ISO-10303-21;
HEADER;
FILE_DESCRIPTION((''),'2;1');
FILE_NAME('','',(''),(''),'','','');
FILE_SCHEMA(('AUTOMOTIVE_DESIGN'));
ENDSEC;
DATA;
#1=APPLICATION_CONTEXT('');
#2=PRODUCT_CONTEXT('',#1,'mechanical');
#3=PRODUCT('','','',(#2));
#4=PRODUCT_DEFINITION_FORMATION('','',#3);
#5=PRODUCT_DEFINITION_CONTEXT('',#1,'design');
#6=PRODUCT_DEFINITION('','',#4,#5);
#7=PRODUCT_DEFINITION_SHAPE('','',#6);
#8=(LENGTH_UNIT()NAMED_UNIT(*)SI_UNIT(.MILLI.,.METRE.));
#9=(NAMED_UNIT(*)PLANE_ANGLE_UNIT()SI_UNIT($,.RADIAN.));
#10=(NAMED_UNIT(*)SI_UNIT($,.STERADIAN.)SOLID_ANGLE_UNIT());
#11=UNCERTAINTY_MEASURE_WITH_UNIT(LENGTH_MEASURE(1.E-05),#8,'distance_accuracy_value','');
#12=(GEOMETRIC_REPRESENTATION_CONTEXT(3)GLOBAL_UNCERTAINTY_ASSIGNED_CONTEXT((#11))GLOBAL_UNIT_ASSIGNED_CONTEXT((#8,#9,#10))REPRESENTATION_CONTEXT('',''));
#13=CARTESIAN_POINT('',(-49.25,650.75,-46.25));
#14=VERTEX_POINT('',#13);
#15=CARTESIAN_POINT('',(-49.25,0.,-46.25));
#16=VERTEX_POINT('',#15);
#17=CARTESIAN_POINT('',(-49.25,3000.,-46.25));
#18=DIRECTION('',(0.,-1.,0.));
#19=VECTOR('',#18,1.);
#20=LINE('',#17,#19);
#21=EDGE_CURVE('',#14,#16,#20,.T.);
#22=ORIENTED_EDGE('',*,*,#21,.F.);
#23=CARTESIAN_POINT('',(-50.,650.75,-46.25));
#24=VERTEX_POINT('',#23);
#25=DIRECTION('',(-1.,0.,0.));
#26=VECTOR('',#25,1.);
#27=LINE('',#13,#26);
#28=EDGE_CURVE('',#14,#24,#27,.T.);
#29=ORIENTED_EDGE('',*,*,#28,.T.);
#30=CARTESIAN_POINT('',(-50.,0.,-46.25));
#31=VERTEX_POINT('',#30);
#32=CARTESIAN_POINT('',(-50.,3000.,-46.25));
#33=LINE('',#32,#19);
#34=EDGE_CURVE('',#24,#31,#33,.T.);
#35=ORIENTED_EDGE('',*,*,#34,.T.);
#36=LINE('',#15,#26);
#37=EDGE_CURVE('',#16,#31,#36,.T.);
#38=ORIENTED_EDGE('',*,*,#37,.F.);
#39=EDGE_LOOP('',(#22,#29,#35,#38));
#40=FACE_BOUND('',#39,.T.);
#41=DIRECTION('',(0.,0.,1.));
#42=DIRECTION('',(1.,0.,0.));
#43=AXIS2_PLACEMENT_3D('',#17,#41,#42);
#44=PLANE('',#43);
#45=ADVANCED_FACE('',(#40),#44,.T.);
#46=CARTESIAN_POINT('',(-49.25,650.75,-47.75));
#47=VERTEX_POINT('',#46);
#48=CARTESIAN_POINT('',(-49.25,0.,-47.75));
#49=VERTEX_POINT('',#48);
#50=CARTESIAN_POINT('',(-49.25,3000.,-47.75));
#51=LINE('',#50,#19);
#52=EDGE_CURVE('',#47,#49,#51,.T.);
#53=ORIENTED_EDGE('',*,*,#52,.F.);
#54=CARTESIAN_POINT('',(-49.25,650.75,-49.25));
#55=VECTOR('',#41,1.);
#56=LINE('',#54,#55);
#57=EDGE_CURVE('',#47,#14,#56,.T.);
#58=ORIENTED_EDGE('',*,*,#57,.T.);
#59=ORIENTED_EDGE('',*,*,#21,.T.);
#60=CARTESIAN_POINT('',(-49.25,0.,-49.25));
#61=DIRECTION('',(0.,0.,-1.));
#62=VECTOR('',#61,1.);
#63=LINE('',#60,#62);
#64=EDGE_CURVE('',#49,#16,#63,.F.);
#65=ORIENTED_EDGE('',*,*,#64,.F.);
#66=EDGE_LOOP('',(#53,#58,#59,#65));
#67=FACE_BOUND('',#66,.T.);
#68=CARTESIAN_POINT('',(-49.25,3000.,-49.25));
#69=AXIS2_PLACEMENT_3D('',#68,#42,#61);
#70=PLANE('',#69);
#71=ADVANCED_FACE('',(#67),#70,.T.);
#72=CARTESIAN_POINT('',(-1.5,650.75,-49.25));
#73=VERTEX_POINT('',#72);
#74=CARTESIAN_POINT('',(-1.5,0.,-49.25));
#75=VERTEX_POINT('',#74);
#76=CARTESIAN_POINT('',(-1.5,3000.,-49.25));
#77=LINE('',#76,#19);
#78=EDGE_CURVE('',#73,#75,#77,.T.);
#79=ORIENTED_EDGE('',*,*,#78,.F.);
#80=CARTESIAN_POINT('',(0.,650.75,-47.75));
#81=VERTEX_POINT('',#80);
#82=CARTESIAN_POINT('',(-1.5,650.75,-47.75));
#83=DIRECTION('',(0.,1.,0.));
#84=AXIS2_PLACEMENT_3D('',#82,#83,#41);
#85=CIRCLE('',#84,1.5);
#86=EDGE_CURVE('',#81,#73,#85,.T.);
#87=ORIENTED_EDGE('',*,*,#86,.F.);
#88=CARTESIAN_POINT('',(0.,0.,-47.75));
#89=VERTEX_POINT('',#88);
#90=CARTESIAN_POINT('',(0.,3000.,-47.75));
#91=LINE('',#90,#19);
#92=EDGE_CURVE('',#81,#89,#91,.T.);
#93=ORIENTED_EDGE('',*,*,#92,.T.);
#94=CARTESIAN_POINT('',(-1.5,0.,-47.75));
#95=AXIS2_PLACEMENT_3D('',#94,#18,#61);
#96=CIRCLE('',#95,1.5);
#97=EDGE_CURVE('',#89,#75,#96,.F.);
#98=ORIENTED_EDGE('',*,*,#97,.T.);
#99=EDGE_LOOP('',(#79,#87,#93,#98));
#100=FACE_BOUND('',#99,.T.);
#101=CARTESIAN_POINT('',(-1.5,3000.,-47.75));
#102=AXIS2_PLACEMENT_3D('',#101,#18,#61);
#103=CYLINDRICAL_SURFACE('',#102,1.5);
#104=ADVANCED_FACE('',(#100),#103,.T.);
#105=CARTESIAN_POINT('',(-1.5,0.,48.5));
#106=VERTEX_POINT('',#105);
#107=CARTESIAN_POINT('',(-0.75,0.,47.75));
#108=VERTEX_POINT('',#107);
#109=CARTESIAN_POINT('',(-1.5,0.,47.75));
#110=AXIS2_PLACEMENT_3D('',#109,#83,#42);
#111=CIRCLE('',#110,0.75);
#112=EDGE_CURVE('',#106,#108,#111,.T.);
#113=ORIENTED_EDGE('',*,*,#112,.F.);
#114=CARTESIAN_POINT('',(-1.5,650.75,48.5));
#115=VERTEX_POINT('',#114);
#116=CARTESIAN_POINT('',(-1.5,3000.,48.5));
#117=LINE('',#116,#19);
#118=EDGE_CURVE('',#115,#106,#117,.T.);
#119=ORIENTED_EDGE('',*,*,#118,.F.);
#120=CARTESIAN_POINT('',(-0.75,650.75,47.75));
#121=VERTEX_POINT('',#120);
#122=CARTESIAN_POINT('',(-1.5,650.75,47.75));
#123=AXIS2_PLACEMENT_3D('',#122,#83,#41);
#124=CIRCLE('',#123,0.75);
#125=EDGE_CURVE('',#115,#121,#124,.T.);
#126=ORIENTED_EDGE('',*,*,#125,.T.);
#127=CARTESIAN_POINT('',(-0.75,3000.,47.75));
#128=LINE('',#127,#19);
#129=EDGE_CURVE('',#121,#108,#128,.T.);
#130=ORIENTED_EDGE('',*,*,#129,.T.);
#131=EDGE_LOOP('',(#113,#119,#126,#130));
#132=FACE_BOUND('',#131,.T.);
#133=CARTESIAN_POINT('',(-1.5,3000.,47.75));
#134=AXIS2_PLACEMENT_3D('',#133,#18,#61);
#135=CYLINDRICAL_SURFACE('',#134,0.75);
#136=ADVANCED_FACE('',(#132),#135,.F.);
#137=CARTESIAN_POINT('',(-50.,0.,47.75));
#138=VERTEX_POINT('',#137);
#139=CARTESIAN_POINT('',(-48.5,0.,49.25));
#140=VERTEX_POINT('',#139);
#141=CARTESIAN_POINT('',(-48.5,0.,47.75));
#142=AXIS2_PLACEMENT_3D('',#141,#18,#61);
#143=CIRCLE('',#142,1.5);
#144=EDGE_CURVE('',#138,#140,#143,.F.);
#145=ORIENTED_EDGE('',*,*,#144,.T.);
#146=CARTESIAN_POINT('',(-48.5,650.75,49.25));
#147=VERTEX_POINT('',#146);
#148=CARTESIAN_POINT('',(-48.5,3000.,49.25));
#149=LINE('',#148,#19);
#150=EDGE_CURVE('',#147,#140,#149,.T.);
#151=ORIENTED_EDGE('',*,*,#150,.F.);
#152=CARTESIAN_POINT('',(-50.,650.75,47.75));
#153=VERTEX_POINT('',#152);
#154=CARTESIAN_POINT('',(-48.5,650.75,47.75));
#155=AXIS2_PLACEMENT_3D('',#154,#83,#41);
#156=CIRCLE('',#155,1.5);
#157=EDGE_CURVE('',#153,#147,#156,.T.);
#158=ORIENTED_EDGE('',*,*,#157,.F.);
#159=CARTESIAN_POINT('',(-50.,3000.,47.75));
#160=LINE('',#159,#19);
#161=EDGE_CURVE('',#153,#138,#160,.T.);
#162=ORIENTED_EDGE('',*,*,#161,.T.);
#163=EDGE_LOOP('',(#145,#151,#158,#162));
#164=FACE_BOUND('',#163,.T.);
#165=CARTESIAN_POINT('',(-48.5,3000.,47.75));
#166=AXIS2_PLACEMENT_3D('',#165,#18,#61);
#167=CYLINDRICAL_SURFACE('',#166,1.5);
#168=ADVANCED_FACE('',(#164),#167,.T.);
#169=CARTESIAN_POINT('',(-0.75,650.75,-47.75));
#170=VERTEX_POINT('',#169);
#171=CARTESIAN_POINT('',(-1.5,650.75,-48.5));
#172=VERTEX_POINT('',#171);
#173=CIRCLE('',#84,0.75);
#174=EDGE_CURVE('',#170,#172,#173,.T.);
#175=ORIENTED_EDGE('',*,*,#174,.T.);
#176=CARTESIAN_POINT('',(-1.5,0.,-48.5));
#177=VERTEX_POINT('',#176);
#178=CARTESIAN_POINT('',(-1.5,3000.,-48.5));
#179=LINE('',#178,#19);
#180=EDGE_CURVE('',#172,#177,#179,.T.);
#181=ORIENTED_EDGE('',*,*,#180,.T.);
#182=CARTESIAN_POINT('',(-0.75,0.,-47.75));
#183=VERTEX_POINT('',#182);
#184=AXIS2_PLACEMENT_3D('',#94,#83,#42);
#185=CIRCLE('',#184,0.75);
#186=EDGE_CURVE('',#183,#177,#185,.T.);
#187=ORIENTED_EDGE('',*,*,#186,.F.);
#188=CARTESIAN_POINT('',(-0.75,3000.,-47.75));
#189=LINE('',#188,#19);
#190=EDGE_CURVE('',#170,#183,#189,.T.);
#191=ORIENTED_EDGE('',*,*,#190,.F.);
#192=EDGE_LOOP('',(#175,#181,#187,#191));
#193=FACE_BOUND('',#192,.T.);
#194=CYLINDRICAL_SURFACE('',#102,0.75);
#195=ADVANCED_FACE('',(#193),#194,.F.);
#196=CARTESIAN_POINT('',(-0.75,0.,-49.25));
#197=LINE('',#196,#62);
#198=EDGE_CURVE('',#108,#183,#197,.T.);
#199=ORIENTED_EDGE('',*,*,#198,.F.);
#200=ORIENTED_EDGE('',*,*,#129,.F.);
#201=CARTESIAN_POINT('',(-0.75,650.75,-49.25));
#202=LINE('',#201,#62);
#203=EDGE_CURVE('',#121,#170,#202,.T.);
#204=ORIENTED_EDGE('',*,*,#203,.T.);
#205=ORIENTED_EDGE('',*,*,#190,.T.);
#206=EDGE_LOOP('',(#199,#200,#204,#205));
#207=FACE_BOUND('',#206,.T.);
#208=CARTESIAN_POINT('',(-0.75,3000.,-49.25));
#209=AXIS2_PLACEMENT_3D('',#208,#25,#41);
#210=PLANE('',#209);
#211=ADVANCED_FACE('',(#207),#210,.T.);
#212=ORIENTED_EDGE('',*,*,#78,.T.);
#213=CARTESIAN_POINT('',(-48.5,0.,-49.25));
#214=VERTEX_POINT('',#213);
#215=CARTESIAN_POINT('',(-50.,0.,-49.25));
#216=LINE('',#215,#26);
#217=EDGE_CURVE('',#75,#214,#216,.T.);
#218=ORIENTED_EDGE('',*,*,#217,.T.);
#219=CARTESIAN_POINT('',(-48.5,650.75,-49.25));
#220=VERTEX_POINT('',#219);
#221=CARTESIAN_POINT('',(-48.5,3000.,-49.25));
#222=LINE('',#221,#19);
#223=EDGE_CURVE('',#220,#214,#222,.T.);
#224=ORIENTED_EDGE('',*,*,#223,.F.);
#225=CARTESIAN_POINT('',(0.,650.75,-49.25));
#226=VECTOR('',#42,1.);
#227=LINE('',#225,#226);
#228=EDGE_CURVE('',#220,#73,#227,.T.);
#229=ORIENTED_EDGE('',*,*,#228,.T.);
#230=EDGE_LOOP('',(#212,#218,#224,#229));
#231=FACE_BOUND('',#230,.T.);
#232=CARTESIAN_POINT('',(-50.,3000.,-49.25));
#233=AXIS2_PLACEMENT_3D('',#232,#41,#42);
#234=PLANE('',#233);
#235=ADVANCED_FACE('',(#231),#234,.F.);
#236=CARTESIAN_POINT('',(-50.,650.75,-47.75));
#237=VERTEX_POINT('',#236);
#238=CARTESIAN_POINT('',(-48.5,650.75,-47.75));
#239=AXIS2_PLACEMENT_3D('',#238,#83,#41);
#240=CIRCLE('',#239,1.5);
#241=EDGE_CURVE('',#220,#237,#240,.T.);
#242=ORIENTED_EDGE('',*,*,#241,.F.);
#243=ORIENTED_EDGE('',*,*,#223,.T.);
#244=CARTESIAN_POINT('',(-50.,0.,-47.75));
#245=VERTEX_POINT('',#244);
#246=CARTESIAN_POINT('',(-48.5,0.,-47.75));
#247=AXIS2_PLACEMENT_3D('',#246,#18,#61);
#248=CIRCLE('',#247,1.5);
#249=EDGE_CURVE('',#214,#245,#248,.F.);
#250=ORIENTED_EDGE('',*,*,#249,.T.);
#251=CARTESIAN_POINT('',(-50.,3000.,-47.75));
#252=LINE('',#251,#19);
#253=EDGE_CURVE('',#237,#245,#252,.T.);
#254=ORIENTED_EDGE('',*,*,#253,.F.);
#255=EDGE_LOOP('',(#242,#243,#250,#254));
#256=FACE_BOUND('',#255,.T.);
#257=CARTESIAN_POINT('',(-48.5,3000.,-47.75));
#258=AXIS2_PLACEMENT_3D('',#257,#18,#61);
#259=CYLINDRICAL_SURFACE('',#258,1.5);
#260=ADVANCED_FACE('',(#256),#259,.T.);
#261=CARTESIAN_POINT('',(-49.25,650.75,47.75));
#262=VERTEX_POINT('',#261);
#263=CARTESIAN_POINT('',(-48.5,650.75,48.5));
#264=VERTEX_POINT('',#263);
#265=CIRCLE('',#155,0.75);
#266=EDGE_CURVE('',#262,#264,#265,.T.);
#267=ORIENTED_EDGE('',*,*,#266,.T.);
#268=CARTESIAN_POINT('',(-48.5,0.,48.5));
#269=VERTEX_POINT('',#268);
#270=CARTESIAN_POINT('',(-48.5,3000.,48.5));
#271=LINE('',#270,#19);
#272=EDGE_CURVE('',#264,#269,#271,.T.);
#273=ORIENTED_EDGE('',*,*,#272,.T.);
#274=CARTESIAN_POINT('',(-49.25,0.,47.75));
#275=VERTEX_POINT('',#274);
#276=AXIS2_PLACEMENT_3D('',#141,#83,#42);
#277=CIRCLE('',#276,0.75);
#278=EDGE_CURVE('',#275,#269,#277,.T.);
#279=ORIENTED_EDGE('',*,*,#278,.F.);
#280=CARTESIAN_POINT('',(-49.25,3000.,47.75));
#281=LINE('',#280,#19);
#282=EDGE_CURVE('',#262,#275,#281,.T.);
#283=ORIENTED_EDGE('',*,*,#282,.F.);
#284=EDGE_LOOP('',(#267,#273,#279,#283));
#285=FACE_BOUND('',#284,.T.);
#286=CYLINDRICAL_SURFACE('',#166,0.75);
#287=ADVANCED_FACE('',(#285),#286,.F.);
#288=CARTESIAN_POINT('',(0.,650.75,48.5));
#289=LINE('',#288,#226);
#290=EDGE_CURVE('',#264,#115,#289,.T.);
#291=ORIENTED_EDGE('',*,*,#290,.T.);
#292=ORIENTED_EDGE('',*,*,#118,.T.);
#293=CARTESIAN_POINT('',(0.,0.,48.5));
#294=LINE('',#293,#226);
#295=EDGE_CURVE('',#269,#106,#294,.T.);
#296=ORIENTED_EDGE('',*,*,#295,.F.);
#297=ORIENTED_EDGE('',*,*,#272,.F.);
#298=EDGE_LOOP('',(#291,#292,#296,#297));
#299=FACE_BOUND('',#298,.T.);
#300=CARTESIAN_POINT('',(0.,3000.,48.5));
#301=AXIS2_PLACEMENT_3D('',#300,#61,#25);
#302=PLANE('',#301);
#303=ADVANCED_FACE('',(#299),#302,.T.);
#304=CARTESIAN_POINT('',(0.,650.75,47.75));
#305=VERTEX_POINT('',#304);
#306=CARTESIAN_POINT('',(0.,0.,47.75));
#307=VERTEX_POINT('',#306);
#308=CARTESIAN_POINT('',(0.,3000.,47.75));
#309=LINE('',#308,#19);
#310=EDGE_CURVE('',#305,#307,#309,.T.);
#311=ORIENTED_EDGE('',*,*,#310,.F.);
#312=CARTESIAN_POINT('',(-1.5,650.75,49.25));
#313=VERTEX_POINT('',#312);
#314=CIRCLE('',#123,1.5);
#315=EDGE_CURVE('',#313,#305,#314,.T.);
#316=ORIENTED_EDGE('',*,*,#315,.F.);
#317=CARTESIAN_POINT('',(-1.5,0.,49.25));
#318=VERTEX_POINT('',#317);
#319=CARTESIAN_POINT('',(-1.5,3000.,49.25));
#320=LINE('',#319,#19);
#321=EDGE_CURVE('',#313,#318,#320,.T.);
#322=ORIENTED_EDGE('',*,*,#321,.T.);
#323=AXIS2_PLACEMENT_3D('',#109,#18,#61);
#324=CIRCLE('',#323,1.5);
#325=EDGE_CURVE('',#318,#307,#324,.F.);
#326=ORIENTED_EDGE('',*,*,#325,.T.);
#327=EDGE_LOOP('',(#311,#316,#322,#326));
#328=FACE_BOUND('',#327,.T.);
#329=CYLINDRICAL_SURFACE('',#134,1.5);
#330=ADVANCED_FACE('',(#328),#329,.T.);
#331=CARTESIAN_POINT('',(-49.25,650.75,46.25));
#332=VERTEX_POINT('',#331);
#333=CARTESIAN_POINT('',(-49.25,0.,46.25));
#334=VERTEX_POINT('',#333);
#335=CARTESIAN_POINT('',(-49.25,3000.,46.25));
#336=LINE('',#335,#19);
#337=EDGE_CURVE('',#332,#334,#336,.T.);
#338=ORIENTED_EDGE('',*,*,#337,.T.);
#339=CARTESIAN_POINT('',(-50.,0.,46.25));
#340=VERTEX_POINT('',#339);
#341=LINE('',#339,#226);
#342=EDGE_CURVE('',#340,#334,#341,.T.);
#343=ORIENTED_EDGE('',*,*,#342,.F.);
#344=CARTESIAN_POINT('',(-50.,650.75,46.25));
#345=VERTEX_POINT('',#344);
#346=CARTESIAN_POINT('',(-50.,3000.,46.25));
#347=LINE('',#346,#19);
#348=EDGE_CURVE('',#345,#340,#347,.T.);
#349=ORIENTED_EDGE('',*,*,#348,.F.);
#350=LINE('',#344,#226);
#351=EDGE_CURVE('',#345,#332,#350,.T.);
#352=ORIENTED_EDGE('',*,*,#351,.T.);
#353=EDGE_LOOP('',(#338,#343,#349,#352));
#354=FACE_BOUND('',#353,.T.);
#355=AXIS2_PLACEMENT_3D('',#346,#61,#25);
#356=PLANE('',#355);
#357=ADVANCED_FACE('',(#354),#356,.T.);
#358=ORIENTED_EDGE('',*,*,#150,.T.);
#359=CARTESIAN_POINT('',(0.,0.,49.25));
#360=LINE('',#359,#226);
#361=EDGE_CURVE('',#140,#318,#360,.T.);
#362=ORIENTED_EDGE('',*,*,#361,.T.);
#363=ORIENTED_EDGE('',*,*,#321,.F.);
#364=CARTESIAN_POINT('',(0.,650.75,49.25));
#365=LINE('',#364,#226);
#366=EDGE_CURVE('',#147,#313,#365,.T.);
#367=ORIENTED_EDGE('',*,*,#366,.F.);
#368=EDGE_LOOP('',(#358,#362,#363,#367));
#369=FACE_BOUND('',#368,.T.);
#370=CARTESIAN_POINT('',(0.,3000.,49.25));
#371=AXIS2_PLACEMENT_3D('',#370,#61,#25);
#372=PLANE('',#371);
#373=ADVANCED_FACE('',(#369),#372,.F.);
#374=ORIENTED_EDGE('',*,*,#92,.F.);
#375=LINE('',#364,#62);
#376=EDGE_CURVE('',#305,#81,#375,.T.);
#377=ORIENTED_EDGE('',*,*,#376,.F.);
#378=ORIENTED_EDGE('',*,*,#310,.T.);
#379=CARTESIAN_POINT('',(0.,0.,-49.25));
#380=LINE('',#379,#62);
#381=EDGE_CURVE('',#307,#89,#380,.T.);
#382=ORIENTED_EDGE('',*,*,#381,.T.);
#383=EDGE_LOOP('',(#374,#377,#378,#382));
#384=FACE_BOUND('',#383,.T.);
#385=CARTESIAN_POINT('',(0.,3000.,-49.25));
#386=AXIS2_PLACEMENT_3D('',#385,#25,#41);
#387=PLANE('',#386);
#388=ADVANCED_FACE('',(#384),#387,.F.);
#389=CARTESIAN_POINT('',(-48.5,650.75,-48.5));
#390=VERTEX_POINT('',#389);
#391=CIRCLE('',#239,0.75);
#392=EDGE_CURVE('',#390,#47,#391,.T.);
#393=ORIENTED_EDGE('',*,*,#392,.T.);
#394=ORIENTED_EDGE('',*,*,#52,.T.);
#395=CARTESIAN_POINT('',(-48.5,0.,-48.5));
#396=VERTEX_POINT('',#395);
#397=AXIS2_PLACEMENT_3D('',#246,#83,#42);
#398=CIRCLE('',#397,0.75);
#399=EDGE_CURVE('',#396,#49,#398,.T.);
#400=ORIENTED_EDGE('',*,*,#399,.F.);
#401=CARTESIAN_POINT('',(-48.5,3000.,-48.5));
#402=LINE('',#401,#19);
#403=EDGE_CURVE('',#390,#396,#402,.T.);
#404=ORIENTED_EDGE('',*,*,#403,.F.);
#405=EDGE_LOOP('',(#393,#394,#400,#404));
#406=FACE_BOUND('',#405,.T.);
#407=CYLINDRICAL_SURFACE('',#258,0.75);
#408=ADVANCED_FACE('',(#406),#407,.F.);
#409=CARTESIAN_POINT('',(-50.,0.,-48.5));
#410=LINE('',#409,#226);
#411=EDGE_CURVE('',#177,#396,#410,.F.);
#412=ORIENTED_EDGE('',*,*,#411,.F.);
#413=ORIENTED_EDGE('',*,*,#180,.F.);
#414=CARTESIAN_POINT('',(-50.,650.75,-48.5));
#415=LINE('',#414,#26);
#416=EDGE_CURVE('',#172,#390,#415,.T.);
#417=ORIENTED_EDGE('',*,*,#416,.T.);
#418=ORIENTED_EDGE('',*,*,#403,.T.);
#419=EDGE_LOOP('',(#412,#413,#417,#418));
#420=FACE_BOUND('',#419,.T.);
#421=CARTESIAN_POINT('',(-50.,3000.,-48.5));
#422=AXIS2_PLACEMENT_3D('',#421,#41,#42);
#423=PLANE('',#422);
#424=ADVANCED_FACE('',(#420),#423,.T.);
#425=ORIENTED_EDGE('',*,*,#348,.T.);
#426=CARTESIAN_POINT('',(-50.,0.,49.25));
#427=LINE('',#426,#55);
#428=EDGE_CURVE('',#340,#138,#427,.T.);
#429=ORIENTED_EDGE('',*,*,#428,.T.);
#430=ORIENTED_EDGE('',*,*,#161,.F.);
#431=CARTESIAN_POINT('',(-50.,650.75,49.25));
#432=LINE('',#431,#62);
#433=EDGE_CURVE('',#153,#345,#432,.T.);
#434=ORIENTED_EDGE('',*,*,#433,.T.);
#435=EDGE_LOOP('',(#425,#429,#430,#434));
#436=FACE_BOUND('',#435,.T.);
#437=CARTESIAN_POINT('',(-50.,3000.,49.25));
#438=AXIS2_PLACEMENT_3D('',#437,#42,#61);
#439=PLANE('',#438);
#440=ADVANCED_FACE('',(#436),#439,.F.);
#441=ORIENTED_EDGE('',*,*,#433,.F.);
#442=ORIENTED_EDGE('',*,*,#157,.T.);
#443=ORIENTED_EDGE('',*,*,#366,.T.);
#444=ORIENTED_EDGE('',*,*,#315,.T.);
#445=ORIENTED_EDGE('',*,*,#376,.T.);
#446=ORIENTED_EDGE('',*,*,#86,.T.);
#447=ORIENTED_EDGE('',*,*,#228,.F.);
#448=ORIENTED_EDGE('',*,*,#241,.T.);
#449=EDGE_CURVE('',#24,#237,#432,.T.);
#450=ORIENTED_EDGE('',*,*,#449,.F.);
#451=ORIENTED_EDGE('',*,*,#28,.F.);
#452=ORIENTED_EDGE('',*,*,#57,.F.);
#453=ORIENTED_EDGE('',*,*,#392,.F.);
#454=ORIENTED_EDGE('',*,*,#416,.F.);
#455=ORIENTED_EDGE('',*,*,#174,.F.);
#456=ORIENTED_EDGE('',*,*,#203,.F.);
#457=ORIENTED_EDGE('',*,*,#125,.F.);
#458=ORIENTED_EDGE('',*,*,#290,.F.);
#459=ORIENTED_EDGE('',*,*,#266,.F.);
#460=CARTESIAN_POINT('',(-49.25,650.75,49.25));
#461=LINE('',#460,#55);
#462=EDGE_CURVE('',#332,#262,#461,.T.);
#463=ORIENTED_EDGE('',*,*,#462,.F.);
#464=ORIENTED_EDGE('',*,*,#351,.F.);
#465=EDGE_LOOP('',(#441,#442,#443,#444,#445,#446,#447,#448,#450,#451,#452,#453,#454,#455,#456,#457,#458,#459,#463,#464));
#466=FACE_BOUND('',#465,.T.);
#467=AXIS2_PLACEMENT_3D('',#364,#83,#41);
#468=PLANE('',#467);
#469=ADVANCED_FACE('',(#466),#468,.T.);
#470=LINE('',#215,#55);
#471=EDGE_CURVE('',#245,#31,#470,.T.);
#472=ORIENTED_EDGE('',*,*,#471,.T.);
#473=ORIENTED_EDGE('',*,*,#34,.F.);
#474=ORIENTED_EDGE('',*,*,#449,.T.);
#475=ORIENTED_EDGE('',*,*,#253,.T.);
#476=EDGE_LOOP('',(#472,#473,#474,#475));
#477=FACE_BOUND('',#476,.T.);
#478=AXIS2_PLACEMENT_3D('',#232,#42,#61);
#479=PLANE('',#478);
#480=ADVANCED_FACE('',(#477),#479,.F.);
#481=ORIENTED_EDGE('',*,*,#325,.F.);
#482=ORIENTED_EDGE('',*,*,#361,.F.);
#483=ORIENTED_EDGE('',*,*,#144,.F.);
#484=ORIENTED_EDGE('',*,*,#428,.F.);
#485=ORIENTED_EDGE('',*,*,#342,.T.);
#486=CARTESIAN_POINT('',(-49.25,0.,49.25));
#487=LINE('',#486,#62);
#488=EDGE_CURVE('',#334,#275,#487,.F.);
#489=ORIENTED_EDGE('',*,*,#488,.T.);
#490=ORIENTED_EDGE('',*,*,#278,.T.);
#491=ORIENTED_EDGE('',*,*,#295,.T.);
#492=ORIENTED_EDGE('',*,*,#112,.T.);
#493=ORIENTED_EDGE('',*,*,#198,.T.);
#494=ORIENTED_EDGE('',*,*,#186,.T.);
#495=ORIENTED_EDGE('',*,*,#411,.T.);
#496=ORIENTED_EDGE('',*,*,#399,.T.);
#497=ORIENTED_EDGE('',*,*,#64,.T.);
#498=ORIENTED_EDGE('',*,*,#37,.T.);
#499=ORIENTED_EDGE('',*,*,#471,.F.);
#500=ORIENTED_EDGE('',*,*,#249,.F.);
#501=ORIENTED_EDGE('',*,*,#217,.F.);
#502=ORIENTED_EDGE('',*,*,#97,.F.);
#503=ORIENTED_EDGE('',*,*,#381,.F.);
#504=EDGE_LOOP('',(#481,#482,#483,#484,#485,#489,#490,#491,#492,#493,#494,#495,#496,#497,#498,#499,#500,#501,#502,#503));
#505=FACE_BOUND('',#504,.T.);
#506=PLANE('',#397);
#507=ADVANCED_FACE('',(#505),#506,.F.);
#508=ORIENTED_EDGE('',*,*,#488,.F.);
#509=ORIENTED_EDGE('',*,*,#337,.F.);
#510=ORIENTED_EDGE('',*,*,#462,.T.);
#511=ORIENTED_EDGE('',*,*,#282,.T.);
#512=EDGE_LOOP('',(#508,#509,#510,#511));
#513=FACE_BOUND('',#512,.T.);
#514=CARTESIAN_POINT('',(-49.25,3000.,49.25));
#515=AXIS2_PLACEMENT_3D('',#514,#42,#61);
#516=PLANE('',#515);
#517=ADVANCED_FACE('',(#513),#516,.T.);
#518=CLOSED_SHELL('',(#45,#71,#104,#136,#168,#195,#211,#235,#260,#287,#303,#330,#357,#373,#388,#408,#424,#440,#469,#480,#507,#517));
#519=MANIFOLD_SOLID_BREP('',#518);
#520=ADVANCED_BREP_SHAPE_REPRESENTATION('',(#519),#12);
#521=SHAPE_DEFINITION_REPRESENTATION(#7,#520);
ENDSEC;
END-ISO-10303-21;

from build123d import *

# Parameters (mm, degrees)
MOVE_BODY_2_DEPTH    = 3000
SKETCH_6_OUTSIDE_W   = 652.406
SKETCH_6_OUTSIDE_H   = 3602.406
SKETCH_6_OUTSIDE_W_2 = 50
SKETCH_6_OUTSIDE_H_2 = 650.75
CUT_EXTRUDE_1_DEPTH  = 3003.033019472


# Read off the part's stored shape, not the designer's step: Тело-Переместить/Копировать2
with BuildPart() as part:
    # Move Body 2 outline → Move Body 2 (new body)
    with BuildSketch(Plane(origin=(0, 0, 0), x_dir=(1, 0, 0), z_dir=(0, 1, 0))):
        with BuildLine():
            Line((-50, 47.75), (-50, 46.25))
            Line((-50, 46.25), (-49.25, 46.25))
            Line((-49.25, 46.25), (-49.25, 47.75))
            ThreePointArc((-49.25, 47.75), (-49.030330086, 48.280330086), (-48.5, 48.5))
            Line((-48.5, 48.5), (-1.5, 48.5))
            ThreePointArc((-1.5, 48.5), (-0.969669914, 48.280330086), (-0.75, 47.75))
            Line((-0.75, 47.75), (-0.75, -47.75))
            ThreePointArc((-0.75, -47.75), (-0.969669914, -48.280330086), (-1.5, -48.5))
            Line((-1.5, -48.5), (-48.5, -48.5))
            ThreePointArc((-48.5, -48.5), (-49.030330086, -48.280330086), (-49.25, -47.75))
            Line((-49.25, -47.75), (-49.25, -46.25))
            Line((-49.25, -46.25), (-50, -46.25))
            Line((-50, -46.25), (-50, -47.75))
            ThreePointArc((-50, -47.75), (-49.560660172, -48.810660172), (-48.5, -49.25))
            Line((-48.5, -49.25), (-1.5, -49.25))
            ThreePointArc((-1.5, -49.25), (-0.439339828, -48.810660172), (0, -47.75))
            Line((0, -47.75), (0, 47.75))
            ThreePointArc((0, 47.75), (-0.439339828, 48.810660172), (-1.5, 49.25))
            Line((-1.5, 49.25), (-48.5, 49.25))
            ThreePointArc((-48.5, 49.25), (-49.560660172, 48.810660172), (-50, 47.75))
        make_face()
    extrude(amount=MOVE_BODY_2_DEPTH)

    # Эскиз6 outside → Вырез-Вытянуть1 (cut, through all)
    with BuildSketch(Plane(origin=(0, 0, -49.25), x_dir=(-1, 0, 0), z_dir=(0, 0, -1))):
        with Locations((25, 1500)):
            Rectangle(SKETCH_6_OUTSIDE_W, SKETCH_6_OUTSIDE_H)
        with Locations((25, 325.375)):
            Rectangle(SKETCH_6_OUTSIDE_W_2, SKETCH_6_OUTSIDE_H_2, mode=Mode.SUBTRACT)
    extrude(amount=-CUT_EXTRUDE_1_DEPTH, mode=Mode.SUBTRACT)


solid = part.part
